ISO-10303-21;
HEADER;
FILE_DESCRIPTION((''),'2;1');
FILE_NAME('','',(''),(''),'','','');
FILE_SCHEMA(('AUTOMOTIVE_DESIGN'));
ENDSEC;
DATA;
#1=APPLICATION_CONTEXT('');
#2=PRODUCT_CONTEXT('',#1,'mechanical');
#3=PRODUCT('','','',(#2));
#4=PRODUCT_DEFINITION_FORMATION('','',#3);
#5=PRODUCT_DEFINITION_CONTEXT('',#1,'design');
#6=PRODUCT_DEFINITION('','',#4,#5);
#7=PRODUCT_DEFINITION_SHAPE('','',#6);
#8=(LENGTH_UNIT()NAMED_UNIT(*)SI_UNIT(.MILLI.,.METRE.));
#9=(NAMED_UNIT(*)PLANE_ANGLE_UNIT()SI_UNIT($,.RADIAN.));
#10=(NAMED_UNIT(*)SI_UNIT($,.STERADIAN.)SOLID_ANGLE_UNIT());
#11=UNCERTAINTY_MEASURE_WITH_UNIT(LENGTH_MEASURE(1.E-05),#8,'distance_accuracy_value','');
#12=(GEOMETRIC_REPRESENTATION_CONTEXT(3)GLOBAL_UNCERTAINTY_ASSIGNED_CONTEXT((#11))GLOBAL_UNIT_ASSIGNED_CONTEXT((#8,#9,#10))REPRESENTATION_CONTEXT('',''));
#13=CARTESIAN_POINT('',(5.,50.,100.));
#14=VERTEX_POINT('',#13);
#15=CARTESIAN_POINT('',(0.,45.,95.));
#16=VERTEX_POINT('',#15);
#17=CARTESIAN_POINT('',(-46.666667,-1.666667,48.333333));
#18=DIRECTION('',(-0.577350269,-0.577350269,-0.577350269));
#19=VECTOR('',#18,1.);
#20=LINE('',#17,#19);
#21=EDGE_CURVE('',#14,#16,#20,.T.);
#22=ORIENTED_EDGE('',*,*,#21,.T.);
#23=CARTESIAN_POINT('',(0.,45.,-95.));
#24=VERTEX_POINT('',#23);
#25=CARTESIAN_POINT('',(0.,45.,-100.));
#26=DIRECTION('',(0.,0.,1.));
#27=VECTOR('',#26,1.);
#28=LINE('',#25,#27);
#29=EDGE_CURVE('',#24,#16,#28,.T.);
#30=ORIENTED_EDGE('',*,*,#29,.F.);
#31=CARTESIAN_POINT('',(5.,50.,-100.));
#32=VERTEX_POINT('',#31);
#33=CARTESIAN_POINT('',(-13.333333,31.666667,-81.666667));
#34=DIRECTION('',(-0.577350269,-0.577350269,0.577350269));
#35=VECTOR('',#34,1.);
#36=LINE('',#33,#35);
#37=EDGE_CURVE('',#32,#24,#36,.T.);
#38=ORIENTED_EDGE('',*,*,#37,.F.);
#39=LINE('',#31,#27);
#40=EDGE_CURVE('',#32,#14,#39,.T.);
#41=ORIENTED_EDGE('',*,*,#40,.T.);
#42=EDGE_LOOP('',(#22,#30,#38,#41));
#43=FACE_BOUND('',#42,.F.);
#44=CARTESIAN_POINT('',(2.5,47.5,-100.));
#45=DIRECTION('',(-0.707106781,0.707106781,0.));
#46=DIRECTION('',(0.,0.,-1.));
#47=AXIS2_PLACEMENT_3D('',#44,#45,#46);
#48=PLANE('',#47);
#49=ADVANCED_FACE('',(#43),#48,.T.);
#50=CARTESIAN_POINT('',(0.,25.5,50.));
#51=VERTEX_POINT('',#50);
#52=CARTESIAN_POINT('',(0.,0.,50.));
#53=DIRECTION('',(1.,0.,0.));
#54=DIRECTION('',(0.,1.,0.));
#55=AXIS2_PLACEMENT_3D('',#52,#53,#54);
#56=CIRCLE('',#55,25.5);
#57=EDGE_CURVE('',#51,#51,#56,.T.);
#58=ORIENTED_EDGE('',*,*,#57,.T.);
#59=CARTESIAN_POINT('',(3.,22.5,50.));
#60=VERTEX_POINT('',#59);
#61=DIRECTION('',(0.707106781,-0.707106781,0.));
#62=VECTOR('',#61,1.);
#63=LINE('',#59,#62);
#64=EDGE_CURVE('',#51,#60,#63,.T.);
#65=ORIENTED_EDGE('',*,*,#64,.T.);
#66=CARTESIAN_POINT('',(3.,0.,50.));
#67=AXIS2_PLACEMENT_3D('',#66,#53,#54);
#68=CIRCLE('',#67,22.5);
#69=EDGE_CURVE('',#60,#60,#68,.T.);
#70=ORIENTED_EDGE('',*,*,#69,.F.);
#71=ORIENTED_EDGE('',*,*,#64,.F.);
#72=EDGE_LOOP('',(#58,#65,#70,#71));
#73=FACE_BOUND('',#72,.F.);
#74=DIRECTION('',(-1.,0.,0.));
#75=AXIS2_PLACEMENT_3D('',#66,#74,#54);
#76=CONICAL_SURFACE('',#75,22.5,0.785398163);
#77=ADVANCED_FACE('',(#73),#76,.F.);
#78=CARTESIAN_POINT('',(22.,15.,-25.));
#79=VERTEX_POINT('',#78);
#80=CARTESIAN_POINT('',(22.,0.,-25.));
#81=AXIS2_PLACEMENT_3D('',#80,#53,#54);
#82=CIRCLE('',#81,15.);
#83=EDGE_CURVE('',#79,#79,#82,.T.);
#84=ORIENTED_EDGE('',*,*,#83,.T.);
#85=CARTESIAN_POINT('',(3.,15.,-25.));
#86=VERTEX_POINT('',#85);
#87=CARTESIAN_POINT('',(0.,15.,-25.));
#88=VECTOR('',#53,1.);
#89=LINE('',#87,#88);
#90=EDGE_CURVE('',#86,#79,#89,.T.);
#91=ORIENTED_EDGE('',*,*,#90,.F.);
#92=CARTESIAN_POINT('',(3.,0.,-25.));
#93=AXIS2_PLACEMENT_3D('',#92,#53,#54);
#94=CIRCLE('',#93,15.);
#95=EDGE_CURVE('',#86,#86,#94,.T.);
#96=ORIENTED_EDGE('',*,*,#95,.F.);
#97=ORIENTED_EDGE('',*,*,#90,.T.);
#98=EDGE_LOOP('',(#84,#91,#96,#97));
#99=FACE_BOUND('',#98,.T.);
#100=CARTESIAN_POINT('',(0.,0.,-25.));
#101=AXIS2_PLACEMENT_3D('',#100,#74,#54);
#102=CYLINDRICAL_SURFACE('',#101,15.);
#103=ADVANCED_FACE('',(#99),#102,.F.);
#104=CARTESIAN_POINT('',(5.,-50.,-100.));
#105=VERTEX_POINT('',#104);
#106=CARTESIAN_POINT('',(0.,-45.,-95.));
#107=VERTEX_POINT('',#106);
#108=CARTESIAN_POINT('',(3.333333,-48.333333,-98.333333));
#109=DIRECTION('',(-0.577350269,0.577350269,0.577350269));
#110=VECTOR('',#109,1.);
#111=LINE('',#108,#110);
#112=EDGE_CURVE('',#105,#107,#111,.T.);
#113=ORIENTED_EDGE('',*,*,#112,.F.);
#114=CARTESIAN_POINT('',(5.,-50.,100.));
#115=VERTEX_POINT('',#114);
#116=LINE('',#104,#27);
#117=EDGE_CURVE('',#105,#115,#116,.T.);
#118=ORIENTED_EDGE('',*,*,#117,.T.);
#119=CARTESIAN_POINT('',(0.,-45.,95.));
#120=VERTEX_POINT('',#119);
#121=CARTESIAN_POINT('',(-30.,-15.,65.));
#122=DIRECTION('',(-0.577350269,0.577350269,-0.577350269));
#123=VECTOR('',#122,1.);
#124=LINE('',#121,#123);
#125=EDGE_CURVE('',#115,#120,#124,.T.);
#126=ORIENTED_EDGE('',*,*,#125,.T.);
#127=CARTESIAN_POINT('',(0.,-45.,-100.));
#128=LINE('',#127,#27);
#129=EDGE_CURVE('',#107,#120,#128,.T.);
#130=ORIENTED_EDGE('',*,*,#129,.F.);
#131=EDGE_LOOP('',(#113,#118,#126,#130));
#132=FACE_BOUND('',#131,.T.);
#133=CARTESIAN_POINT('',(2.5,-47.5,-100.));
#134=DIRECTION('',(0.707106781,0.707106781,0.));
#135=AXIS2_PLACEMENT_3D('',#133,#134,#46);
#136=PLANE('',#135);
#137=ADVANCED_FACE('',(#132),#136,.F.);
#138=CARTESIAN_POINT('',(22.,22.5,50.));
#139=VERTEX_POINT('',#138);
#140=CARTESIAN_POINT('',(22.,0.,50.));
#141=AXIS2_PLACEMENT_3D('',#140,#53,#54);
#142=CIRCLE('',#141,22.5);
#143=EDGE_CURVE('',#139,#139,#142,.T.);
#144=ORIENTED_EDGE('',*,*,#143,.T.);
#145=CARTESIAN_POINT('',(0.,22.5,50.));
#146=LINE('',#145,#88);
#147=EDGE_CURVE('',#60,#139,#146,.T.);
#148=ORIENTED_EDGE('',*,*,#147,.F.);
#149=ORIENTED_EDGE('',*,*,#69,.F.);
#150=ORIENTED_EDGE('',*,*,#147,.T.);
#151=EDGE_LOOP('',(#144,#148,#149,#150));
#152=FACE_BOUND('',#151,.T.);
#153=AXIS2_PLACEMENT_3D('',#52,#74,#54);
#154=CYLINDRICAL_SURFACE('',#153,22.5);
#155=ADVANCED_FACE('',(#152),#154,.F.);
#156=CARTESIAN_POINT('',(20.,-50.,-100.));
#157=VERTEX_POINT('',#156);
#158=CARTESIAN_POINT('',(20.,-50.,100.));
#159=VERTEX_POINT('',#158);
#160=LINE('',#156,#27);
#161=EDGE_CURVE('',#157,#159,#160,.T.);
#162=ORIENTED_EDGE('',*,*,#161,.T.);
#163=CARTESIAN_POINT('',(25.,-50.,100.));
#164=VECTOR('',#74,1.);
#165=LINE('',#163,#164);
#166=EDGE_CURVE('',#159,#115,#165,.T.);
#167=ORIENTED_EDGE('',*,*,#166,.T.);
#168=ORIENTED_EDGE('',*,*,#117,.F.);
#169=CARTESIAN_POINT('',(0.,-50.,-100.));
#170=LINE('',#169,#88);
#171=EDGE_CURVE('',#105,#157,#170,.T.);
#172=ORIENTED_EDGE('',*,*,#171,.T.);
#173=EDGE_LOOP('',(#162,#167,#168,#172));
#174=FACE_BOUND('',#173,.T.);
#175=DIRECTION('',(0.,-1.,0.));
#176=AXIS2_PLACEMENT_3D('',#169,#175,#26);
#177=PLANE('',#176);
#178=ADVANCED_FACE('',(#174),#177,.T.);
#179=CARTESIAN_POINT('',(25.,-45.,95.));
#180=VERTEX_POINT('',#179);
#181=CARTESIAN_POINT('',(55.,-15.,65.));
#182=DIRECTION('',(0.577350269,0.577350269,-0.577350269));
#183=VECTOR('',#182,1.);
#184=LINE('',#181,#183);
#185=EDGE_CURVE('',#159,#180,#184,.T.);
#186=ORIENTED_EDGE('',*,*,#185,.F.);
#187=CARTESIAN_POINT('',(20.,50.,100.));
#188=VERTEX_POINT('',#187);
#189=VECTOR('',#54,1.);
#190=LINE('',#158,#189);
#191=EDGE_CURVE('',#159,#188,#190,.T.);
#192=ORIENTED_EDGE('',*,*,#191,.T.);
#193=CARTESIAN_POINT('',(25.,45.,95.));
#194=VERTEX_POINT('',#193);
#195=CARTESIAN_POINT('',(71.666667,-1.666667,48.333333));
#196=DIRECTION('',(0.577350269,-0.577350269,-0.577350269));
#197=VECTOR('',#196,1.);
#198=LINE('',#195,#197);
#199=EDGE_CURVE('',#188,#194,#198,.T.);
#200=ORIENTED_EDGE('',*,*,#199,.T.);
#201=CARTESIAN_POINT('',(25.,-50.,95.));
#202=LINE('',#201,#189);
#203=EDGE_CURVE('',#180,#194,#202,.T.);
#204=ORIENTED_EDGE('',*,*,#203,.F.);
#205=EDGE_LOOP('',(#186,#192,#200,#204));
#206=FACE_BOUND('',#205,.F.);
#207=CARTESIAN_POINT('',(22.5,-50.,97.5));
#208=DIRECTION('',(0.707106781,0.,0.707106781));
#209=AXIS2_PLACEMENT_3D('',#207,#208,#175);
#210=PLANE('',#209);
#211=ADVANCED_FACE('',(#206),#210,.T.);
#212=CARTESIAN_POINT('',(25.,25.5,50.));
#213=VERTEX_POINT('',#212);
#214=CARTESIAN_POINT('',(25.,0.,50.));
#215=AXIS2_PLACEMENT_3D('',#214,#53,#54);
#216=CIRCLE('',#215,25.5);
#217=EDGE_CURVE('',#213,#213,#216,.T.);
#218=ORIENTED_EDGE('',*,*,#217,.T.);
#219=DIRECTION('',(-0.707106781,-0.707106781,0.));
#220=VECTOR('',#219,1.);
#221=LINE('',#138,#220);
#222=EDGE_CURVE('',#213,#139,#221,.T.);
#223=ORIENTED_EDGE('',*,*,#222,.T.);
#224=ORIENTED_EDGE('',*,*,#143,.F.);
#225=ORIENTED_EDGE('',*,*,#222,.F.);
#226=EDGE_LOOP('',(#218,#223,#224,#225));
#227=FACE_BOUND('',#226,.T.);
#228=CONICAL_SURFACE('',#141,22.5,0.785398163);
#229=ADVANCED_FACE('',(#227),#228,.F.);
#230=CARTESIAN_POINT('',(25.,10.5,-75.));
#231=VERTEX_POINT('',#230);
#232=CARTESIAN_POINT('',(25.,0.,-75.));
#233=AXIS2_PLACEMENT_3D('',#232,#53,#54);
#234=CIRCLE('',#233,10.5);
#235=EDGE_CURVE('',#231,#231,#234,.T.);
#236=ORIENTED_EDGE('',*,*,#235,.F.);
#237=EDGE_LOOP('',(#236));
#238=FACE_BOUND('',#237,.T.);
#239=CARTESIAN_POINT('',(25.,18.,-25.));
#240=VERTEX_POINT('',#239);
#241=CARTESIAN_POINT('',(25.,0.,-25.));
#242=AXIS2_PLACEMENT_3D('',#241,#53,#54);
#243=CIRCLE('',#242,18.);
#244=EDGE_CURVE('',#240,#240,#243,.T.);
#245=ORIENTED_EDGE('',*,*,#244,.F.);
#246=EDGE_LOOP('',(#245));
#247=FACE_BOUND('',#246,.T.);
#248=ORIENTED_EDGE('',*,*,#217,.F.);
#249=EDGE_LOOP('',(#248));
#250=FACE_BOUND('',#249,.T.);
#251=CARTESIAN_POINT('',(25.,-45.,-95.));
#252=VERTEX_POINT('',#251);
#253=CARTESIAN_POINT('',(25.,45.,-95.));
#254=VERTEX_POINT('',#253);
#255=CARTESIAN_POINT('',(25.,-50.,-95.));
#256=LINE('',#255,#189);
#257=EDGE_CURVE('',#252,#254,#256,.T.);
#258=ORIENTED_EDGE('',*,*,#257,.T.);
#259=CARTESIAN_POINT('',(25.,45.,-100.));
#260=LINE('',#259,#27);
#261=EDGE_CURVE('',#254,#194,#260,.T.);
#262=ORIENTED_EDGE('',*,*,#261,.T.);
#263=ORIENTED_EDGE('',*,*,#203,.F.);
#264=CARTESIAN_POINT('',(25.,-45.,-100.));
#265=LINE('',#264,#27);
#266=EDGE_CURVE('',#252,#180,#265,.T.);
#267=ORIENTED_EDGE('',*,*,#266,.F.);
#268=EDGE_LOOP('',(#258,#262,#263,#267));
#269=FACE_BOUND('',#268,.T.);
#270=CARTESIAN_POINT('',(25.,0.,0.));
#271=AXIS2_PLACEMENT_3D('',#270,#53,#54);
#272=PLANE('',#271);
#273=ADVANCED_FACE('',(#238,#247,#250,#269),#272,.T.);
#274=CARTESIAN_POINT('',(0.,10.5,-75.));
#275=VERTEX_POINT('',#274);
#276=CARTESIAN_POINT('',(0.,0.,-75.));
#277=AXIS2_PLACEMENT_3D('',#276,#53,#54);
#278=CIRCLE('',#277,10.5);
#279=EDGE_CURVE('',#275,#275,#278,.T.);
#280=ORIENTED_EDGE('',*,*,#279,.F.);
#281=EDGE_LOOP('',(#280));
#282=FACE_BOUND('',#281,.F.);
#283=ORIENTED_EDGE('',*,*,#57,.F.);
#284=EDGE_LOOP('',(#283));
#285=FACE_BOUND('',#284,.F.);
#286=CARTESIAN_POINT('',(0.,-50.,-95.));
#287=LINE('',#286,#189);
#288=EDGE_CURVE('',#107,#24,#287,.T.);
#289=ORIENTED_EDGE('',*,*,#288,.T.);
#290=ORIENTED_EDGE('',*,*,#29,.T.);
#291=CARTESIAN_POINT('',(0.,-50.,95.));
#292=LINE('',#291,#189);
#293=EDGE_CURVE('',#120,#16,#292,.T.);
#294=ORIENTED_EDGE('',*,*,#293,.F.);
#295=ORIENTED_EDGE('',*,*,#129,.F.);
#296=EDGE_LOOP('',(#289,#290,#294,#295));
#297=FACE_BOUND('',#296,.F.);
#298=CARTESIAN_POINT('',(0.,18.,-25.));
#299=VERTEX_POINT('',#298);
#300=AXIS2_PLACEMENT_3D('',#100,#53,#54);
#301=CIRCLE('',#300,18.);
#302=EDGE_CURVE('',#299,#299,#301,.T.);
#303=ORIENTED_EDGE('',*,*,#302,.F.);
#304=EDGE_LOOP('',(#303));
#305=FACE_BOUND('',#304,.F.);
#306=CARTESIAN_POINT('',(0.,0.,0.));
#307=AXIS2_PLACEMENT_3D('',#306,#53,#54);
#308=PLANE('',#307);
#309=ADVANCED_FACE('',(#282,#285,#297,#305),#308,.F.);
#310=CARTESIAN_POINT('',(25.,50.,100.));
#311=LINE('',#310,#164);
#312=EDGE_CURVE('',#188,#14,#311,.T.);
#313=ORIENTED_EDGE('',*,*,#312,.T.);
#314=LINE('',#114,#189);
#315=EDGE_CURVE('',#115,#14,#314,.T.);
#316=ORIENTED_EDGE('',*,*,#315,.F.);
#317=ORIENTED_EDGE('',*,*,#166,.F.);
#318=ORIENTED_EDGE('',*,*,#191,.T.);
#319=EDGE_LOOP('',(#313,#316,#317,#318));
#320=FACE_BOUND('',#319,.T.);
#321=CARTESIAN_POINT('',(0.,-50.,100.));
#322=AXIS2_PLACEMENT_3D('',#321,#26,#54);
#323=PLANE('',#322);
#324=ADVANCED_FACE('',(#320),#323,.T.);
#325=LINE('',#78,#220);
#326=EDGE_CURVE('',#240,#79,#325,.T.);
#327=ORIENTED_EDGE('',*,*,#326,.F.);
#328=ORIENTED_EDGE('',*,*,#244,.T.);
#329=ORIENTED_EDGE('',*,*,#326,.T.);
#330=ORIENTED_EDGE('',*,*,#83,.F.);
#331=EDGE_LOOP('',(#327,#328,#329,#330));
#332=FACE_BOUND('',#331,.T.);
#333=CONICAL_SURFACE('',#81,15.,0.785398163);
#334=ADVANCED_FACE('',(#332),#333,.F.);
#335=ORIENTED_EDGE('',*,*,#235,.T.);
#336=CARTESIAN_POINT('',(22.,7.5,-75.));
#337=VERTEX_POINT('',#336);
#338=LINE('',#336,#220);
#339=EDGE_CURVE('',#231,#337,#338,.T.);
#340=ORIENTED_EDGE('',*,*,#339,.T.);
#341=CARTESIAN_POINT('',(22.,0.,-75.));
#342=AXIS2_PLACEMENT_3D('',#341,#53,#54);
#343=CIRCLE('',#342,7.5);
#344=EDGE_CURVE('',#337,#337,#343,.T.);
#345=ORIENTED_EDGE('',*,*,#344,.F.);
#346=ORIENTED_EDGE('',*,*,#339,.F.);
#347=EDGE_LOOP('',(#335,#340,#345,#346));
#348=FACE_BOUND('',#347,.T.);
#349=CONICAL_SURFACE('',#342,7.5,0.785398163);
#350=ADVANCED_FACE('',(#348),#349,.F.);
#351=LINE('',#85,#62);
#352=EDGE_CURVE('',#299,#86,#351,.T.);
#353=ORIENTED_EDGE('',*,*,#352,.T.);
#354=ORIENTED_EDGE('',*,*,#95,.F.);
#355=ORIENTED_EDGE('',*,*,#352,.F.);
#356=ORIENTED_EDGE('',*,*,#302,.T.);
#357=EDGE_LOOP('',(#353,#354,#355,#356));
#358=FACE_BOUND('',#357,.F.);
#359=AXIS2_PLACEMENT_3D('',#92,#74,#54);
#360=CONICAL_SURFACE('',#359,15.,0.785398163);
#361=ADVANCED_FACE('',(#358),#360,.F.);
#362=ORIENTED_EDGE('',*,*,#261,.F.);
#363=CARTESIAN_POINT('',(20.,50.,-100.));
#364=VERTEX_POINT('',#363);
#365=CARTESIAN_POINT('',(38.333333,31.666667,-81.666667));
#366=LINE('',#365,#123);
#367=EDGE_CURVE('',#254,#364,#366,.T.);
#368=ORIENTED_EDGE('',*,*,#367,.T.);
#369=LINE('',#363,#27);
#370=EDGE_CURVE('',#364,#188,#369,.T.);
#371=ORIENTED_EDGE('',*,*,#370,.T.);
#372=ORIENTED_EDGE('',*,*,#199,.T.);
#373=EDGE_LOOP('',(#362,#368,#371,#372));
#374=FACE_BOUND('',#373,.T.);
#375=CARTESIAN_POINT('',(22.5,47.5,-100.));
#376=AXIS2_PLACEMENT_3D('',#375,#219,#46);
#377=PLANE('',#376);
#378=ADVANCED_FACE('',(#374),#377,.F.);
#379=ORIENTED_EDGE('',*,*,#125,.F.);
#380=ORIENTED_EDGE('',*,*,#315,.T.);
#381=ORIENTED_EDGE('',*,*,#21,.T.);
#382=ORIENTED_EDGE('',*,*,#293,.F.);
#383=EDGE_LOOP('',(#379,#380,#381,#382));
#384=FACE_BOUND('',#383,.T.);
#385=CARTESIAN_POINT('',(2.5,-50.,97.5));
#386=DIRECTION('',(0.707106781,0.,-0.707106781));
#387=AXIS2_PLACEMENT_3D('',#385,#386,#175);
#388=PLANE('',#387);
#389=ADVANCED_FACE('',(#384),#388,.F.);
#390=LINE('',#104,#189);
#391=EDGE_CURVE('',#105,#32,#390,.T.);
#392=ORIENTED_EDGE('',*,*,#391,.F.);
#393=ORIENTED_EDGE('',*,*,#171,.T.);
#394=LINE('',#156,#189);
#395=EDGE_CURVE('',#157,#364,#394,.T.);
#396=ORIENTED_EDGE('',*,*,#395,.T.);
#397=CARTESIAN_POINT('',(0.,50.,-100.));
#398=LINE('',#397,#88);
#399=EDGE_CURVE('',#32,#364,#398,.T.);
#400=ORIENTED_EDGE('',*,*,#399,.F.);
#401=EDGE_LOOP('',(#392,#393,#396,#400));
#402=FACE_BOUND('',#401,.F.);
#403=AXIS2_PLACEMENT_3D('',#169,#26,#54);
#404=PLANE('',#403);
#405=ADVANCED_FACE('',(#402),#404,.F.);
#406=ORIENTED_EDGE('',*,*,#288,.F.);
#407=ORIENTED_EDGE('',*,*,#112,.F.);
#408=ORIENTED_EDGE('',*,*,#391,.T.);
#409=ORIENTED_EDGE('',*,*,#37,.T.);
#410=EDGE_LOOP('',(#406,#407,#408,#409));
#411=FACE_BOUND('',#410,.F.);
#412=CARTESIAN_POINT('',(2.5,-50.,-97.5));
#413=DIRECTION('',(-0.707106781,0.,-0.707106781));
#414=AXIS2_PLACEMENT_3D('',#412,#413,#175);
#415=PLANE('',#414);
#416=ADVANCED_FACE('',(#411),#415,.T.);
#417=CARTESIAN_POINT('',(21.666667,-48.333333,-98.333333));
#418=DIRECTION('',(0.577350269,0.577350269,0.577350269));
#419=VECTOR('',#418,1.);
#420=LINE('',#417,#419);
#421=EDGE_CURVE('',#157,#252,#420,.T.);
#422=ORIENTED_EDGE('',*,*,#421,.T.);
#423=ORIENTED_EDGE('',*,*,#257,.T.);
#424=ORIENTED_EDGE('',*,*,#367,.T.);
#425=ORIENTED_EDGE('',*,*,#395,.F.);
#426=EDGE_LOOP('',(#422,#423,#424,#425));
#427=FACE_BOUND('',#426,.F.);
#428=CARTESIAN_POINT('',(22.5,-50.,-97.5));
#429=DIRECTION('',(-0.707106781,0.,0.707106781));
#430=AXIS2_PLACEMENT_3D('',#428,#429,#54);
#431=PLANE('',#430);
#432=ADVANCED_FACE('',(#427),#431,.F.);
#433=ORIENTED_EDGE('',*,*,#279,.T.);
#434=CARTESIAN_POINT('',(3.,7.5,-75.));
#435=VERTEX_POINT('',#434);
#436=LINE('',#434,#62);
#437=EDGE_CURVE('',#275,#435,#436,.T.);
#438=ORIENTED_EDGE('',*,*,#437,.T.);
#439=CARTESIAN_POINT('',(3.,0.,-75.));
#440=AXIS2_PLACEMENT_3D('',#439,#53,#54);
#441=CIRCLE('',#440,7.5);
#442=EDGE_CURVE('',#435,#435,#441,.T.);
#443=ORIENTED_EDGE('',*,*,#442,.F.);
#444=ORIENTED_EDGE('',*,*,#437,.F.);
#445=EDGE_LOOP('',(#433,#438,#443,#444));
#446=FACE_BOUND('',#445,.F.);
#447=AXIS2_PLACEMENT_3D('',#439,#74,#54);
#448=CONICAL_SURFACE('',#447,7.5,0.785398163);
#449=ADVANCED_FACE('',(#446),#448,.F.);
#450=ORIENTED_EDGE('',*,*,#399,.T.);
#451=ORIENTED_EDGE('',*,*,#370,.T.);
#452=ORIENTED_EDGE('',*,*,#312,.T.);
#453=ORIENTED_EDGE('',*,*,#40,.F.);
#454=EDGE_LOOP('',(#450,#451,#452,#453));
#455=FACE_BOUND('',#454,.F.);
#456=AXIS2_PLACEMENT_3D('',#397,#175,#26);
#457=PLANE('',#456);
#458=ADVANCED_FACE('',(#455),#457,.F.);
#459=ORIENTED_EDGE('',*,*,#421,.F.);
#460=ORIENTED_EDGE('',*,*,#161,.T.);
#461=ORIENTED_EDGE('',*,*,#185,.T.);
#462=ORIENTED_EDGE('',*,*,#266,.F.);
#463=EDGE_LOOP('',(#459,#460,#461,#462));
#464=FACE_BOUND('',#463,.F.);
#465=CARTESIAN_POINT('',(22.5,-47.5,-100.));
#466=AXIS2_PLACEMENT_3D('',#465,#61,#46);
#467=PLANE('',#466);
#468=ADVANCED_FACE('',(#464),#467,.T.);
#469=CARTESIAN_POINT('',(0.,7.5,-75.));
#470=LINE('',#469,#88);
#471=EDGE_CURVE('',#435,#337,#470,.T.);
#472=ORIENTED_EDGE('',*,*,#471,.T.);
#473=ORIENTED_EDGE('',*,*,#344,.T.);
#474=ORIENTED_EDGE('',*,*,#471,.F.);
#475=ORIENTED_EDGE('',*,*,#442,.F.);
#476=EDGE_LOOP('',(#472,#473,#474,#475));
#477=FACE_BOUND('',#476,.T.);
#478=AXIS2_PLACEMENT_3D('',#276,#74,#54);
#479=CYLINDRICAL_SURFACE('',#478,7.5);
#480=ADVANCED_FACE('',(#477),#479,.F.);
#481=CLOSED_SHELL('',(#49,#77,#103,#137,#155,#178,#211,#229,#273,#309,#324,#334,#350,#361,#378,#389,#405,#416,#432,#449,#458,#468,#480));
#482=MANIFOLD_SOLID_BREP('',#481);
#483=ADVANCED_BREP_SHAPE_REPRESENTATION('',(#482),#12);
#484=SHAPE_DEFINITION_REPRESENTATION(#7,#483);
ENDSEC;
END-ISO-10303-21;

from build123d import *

# Parameters (mm, degrees)
F0_W     = 100
F0_H     = 200
F0_R     = 7.5
F0_R_2   = 15
F0_R_3   = 22.5
F1_DEPTH = 25
F2_SIZE  = 5
F3_DEPTH = 25
F4_SIZE  = 5
F5_SIZE  = 3


# Not quite as in the source:
# - a feature names something its author has since deleted; it is built from what else it names


with BuildPart() as f1:
    # F0 (on Right) → F1 (new body)
    with BuildSketch(Plane.YZ):
        Rectangle(F0_W, F0_H)
        with Locations((0, -75)):
            Circle(F0_R, mode=Mode.SUBTRACT)
        with Locations((0, -25)):
            Circle(F0_R_2, mode=Mode.SUBTRACT)
        with Locations((0, 50)):
            Circle(F0_R_3, mode=Mode.SUBTRACT)
    extrude(amount=F1_DEPTH)

    # F2
    f2_edges = [f1.edges().sort_by_distance(p)[0] for p in [
        (25, 50, 0),
        (0, 50, 0),
        (12.5, 22.5, 50),
        (0, -22.5, 50),
        (25, -22.5, 50),
        (12.5, 7.5, -75),
        (0, -7.5, -75),
        (25, -7.5, -75),
        (0, -50, 0),
        (25, -50, 0),
        (25, 0, -100),
        (0, 0, -100),
        (0, 0, 100),
        (25, 0, 100),
    ]]
    chamfer(f2_edges, length=F2_SIZE)

    # F0 (on Right) → F3 (join)
    with BuildSketch(Plane.YZ):
        Rectangle(F0_W, F0_H)
        with Locations((0, -75)):
            Circle(F0_R, mode=Mode.SUBTRACT)
        with Locations((0, -25)):
            Circle(F0_R_2, mode=Mode.SUBTRACT)
        with Locations((0, 50)):
            Circle(F0_R_3, mode=Mode.SUBTRACT)
    extrude(amount=F3_DEPTH)

    # F4
    f4_edges = [f1.edges().sort_by_distance(p)[0] for p in [
        (25, 0, 100),
        (25, -50, 0),
        (25, 0, -100),
        (25, 50, 0),
        (0, -50, 0),
        (0, 0, 100),
        (0, 50, 0),
        (0, 0, -100),
    ]]
    chamfer(f4_edges, length=F4_SIZE)

    # F5
    f5_edges = [f1.edges().sort_by_distance(p)[0] for p in [
        (0, -22.5, 50),
        (12.5, 22.5, 50),
        (25, -22.5, 50),
        (12.5, 15, -25),
        (0, -15, -25),
        (25, -15, -25),
        (0, -7.5, -75),
        (12.5, 7.5, -75),
        (25, -7.5, -75),
    ]]
    chamfer(f5_edges, length=F5_SIZE)


solid = f1.part
